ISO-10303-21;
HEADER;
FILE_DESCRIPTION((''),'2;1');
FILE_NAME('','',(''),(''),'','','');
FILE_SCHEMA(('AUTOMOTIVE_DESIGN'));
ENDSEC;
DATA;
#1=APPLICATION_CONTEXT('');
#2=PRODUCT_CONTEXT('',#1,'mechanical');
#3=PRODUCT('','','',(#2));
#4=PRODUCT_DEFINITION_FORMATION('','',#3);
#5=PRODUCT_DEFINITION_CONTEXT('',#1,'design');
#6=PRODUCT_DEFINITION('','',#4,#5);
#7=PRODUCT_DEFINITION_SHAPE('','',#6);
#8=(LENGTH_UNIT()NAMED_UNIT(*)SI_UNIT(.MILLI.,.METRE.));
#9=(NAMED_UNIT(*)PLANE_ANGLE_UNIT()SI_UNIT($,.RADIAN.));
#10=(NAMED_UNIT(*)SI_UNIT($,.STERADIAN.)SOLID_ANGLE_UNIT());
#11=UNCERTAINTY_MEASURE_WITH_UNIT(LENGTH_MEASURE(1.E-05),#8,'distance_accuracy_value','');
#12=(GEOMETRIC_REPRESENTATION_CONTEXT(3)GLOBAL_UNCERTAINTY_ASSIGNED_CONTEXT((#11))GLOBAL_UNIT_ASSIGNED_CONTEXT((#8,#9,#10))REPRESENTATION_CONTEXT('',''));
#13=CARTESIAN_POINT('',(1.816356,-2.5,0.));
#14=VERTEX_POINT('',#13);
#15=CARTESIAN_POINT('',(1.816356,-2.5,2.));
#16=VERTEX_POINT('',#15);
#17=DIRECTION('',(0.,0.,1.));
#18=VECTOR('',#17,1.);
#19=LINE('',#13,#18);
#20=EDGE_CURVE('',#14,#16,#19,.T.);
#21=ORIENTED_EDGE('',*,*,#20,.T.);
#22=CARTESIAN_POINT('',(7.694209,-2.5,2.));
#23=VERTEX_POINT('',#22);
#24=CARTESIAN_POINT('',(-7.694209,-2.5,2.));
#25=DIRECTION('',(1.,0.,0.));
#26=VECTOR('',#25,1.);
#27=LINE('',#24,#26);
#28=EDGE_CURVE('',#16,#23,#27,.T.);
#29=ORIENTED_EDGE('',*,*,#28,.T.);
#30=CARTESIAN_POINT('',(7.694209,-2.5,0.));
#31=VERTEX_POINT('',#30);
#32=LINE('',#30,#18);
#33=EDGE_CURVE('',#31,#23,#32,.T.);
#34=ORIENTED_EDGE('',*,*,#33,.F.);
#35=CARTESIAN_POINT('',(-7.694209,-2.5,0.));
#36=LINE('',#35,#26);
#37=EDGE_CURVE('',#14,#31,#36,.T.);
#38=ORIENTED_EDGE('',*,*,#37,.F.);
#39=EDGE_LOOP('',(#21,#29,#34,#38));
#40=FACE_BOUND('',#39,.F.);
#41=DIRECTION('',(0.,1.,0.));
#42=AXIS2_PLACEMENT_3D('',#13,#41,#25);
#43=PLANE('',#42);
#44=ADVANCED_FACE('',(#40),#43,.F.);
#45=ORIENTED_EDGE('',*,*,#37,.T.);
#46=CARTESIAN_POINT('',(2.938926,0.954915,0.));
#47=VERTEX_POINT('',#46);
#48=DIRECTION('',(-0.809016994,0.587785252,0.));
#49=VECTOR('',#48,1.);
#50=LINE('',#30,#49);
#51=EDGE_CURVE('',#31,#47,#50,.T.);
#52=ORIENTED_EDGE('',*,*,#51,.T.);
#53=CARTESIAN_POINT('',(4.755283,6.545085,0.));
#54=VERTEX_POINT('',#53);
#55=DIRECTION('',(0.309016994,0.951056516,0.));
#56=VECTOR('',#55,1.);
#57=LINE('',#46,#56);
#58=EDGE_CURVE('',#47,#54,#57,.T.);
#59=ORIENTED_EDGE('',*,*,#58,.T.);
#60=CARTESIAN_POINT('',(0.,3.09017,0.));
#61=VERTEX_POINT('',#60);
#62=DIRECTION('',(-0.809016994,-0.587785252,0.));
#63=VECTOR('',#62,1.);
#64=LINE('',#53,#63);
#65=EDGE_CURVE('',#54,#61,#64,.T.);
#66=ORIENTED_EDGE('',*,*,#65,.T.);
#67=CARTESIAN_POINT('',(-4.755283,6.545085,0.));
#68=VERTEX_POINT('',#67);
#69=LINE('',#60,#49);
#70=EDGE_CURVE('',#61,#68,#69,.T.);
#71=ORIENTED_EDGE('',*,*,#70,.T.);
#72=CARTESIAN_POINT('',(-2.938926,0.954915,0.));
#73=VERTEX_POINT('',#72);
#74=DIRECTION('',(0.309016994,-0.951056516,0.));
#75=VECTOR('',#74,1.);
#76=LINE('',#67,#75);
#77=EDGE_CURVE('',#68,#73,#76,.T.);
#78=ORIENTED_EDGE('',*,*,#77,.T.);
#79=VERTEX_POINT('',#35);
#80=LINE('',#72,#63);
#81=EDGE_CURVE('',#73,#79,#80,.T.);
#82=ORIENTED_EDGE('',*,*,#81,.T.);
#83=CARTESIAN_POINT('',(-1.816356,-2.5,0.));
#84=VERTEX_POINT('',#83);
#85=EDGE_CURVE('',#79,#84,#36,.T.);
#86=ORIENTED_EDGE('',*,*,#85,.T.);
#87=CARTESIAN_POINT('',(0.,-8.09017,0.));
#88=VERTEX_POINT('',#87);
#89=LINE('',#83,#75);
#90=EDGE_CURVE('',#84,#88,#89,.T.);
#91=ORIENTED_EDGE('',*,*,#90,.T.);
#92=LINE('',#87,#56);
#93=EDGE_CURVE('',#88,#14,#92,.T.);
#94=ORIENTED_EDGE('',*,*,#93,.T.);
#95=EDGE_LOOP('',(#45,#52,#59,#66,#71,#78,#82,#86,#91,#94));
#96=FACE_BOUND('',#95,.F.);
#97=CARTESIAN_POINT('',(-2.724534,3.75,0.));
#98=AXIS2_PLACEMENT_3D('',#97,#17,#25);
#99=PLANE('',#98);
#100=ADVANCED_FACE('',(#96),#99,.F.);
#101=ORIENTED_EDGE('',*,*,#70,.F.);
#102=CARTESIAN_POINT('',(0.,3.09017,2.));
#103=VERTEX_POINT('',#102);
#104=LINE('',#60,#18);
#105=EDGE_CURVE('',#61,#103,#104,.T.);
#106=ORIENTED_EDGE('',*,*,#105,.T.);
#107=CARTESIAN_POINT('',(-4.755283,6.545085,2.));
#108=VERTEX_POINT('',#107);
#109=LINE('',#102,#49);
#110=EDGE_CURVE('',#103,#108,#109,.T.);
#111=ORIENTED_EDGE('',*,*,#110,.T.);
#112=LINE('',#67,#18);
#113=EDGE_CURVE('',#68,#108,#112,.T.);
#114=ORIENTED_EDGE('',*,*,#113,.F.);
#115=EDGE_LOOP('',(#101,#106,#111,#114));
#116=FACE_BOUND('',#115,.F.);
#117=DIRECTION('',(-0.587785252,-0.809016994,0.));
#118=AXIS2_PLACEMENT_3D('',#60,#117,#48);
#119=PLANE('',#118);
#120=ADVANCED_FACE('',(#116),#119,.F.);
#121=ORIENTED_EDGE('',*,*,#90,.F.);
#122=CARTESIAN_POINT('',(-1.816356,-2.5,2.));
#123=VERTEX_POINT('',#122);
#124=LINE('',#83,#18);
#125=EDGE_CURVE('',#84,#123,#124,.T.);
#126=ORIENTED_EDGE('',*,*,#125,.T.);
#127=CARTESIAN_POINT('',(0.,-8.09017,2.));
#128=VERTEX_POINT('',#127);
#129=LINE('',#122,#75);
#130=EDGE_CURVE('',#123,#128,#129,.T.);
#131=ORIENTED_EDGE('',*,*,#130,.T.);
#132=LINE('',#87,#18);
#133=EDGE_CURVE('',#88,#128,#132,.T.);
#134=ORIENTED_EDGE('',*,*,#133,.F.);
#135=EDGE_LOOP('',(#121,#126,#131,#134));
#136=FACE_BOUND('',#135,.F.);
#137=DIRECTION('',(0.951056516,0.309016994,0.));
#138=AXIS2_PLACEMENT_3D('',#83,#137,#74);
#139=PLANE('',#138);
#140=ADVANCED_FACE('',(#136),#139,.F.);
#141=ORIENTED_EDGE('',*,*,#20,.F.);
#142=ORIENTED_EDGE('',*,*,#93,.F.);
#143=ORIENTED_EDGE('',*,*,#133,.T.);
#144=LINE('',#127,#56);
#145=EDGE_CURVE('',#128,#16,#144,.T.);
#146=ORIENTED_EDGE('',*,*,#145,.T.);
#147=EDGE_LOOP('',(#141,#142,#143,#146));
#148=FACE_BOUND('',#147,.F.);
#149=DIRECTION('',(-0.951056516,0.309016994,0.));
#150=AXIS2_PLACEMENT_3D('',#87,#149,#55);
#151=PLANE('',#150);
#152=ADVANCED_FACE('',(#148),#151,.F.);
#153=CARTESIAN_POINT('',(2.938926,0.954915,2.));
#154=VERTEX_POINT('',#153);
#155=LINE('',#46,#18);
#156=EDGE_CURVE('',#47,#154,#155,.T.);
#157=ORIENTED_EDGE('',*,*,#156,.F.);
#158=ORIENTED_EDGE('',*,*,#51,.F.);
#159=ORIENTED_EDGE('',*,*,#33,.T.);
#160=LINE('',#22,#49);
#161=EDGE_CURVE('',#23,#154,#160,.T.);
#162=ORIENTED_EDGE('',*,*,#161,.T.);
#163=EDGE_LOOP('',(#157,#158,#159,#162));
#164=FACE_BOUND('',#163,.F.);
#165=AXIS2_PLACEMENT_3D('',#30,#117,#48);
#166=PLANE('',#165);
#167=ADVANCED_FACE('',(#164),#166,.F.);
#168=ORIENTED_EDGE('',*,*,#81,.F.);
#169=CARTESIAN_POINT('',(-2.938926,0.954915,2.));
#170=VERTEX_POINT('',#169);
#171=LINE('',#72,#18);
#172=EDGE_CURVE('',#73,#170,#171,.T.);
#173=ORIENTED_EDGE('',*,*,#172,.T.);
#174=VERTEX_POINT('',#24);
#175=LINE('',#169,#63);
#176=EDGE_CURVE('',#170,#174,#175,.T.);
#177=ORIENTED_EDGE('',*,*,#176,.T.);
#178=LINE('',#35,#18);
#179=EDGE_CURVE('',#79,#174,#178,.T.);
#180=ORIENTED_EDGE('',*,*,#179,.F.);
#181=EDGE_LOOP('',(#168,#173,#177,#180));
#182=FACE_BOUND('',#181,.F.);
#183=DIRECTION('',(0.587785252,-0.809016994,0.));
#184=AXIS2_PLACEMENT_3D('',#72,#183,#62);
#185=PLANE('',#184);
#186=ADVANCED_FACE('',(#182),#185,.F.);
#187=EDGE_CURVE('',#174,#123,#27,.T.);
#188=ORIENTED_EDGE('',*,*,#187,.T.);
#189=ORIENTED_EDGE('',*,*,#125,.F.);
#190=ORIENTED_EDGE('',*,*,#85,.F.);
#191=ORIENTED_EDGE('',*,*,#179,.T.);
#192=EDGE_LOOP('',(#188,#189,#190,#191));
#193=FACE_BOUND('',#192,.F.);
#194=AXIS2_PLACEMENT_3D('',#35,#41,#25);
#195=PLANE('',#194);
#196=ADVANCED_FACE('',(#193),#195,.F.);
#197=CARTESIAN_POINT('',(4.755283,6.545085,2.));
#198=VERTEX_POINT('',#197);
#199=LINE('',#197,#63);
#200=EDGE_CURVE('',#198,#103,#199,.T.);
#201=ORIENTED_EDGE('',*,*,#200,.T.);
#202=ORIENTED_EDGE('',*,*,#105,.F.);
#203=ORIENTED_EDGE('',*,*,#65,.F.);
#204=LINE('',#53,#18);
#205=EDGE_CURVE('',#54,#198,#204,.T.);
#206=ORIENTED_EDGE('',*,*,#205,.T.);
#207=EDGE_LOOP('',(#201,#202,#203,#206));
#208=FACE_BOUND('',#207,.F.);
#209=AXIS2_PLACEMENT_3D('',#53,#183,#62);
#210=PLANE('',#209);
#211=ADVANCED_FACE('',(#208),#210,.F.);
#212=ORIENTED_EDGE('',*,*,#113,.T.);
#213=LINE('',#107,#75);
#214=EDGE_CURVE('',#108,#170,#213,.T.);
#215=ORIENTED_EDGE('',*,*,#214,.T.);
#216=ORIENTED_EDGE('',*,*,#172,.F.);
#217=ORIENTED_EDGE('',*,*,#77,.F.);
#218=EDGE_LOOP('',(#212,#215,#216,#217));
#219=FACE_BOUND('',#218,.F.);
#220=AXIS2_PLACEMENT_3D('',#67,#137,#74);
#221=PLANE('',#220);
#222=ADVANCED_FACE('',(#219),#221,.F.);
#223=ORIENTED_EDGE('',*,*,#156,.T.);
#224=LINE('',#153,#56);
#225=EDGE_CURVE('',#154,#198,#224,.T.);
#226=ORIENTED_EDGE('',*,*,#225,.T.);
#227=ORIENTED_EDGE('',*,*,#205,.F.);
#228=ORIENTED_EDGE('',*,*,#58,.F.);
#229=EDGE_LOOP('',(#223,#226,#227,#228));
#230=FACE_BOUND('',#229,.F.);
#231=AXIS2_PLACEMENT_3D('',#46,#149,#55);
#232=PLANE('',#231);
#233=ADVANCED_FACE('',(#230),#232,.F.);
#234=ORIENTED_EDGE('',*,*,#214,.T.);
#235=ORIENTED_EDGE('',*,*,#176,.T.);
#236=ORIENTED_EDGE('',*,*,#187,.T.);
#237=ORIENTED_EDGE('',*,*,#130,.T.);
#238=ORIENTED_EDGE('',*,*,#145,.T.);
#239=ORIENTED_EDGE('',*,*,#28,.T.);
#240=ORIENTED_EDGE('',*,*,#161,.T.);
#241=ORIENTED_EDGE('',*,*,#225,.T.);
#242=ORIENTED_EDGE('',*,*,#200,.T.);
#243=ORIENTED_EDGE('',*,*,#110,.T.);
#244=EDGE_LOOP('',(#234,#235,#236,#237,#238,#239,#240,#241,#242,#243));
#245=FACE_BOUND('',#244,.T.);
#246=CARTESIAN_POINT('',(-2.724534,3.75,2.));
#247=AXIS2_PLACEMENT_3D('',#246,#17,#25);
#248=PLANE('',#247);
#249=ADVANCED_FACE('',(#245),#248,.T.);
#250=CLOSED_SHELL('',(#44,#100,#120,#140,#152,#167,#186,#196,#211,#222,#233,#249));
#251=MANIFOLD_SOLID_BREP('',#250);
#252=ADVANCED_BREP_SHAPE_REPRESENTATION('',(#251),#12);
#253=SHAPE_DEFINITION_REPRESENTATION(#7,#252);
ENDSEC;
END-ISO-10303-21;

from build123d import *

# Parameters (mm, degrees)
F1_DEPTH = 2


# Not quite as in the source:
# - a feature names something its author has since deleted; it is built from what else it names


with BuildPart() as f1:
    # F0 (on Top) → F1 (new body)
    with BuildSketch(Plane.XY):
        Polygon((-2.9389262615, 0.9549150281), (0, 3.0901699437), (-4.7552825815, 6.5450849719), align=None)
        Polygon((4.7552825815, 6.5450849719), (0, 3.0901699437), (2.9389262615, 0.9549150281), align=None)
        Polygon((2.9389262615, 0.9549150281), (0, 3.0901699437), (-2.9389262615, 0.9549150281), (-1.81635632, -2.5), (1.81635632, -2.5), (2.3776412907, -0.7725424859), align=None)
        Polygon((-1.81635632, -2.5), (-2.9389262615, 0.9549150281), (-7.6942088429, -2.5), align=None)
        Polygon((7.6942088429, -2.5), (2.9389262615, 0.9549150281), (2.3776412907, -0.7725424859), align=None)
        Polygon((7.6942088429, -2.5), (2.3776412907, -0.7725424859), (1.81635632, -2.5), align=None)
        Polygon((1.81635632, -2.5), (-1.81635632, -2.5), (0, -8.0901699437), align=None)
    extrude(amount=F1_DEPTH)


solid = f1.part
